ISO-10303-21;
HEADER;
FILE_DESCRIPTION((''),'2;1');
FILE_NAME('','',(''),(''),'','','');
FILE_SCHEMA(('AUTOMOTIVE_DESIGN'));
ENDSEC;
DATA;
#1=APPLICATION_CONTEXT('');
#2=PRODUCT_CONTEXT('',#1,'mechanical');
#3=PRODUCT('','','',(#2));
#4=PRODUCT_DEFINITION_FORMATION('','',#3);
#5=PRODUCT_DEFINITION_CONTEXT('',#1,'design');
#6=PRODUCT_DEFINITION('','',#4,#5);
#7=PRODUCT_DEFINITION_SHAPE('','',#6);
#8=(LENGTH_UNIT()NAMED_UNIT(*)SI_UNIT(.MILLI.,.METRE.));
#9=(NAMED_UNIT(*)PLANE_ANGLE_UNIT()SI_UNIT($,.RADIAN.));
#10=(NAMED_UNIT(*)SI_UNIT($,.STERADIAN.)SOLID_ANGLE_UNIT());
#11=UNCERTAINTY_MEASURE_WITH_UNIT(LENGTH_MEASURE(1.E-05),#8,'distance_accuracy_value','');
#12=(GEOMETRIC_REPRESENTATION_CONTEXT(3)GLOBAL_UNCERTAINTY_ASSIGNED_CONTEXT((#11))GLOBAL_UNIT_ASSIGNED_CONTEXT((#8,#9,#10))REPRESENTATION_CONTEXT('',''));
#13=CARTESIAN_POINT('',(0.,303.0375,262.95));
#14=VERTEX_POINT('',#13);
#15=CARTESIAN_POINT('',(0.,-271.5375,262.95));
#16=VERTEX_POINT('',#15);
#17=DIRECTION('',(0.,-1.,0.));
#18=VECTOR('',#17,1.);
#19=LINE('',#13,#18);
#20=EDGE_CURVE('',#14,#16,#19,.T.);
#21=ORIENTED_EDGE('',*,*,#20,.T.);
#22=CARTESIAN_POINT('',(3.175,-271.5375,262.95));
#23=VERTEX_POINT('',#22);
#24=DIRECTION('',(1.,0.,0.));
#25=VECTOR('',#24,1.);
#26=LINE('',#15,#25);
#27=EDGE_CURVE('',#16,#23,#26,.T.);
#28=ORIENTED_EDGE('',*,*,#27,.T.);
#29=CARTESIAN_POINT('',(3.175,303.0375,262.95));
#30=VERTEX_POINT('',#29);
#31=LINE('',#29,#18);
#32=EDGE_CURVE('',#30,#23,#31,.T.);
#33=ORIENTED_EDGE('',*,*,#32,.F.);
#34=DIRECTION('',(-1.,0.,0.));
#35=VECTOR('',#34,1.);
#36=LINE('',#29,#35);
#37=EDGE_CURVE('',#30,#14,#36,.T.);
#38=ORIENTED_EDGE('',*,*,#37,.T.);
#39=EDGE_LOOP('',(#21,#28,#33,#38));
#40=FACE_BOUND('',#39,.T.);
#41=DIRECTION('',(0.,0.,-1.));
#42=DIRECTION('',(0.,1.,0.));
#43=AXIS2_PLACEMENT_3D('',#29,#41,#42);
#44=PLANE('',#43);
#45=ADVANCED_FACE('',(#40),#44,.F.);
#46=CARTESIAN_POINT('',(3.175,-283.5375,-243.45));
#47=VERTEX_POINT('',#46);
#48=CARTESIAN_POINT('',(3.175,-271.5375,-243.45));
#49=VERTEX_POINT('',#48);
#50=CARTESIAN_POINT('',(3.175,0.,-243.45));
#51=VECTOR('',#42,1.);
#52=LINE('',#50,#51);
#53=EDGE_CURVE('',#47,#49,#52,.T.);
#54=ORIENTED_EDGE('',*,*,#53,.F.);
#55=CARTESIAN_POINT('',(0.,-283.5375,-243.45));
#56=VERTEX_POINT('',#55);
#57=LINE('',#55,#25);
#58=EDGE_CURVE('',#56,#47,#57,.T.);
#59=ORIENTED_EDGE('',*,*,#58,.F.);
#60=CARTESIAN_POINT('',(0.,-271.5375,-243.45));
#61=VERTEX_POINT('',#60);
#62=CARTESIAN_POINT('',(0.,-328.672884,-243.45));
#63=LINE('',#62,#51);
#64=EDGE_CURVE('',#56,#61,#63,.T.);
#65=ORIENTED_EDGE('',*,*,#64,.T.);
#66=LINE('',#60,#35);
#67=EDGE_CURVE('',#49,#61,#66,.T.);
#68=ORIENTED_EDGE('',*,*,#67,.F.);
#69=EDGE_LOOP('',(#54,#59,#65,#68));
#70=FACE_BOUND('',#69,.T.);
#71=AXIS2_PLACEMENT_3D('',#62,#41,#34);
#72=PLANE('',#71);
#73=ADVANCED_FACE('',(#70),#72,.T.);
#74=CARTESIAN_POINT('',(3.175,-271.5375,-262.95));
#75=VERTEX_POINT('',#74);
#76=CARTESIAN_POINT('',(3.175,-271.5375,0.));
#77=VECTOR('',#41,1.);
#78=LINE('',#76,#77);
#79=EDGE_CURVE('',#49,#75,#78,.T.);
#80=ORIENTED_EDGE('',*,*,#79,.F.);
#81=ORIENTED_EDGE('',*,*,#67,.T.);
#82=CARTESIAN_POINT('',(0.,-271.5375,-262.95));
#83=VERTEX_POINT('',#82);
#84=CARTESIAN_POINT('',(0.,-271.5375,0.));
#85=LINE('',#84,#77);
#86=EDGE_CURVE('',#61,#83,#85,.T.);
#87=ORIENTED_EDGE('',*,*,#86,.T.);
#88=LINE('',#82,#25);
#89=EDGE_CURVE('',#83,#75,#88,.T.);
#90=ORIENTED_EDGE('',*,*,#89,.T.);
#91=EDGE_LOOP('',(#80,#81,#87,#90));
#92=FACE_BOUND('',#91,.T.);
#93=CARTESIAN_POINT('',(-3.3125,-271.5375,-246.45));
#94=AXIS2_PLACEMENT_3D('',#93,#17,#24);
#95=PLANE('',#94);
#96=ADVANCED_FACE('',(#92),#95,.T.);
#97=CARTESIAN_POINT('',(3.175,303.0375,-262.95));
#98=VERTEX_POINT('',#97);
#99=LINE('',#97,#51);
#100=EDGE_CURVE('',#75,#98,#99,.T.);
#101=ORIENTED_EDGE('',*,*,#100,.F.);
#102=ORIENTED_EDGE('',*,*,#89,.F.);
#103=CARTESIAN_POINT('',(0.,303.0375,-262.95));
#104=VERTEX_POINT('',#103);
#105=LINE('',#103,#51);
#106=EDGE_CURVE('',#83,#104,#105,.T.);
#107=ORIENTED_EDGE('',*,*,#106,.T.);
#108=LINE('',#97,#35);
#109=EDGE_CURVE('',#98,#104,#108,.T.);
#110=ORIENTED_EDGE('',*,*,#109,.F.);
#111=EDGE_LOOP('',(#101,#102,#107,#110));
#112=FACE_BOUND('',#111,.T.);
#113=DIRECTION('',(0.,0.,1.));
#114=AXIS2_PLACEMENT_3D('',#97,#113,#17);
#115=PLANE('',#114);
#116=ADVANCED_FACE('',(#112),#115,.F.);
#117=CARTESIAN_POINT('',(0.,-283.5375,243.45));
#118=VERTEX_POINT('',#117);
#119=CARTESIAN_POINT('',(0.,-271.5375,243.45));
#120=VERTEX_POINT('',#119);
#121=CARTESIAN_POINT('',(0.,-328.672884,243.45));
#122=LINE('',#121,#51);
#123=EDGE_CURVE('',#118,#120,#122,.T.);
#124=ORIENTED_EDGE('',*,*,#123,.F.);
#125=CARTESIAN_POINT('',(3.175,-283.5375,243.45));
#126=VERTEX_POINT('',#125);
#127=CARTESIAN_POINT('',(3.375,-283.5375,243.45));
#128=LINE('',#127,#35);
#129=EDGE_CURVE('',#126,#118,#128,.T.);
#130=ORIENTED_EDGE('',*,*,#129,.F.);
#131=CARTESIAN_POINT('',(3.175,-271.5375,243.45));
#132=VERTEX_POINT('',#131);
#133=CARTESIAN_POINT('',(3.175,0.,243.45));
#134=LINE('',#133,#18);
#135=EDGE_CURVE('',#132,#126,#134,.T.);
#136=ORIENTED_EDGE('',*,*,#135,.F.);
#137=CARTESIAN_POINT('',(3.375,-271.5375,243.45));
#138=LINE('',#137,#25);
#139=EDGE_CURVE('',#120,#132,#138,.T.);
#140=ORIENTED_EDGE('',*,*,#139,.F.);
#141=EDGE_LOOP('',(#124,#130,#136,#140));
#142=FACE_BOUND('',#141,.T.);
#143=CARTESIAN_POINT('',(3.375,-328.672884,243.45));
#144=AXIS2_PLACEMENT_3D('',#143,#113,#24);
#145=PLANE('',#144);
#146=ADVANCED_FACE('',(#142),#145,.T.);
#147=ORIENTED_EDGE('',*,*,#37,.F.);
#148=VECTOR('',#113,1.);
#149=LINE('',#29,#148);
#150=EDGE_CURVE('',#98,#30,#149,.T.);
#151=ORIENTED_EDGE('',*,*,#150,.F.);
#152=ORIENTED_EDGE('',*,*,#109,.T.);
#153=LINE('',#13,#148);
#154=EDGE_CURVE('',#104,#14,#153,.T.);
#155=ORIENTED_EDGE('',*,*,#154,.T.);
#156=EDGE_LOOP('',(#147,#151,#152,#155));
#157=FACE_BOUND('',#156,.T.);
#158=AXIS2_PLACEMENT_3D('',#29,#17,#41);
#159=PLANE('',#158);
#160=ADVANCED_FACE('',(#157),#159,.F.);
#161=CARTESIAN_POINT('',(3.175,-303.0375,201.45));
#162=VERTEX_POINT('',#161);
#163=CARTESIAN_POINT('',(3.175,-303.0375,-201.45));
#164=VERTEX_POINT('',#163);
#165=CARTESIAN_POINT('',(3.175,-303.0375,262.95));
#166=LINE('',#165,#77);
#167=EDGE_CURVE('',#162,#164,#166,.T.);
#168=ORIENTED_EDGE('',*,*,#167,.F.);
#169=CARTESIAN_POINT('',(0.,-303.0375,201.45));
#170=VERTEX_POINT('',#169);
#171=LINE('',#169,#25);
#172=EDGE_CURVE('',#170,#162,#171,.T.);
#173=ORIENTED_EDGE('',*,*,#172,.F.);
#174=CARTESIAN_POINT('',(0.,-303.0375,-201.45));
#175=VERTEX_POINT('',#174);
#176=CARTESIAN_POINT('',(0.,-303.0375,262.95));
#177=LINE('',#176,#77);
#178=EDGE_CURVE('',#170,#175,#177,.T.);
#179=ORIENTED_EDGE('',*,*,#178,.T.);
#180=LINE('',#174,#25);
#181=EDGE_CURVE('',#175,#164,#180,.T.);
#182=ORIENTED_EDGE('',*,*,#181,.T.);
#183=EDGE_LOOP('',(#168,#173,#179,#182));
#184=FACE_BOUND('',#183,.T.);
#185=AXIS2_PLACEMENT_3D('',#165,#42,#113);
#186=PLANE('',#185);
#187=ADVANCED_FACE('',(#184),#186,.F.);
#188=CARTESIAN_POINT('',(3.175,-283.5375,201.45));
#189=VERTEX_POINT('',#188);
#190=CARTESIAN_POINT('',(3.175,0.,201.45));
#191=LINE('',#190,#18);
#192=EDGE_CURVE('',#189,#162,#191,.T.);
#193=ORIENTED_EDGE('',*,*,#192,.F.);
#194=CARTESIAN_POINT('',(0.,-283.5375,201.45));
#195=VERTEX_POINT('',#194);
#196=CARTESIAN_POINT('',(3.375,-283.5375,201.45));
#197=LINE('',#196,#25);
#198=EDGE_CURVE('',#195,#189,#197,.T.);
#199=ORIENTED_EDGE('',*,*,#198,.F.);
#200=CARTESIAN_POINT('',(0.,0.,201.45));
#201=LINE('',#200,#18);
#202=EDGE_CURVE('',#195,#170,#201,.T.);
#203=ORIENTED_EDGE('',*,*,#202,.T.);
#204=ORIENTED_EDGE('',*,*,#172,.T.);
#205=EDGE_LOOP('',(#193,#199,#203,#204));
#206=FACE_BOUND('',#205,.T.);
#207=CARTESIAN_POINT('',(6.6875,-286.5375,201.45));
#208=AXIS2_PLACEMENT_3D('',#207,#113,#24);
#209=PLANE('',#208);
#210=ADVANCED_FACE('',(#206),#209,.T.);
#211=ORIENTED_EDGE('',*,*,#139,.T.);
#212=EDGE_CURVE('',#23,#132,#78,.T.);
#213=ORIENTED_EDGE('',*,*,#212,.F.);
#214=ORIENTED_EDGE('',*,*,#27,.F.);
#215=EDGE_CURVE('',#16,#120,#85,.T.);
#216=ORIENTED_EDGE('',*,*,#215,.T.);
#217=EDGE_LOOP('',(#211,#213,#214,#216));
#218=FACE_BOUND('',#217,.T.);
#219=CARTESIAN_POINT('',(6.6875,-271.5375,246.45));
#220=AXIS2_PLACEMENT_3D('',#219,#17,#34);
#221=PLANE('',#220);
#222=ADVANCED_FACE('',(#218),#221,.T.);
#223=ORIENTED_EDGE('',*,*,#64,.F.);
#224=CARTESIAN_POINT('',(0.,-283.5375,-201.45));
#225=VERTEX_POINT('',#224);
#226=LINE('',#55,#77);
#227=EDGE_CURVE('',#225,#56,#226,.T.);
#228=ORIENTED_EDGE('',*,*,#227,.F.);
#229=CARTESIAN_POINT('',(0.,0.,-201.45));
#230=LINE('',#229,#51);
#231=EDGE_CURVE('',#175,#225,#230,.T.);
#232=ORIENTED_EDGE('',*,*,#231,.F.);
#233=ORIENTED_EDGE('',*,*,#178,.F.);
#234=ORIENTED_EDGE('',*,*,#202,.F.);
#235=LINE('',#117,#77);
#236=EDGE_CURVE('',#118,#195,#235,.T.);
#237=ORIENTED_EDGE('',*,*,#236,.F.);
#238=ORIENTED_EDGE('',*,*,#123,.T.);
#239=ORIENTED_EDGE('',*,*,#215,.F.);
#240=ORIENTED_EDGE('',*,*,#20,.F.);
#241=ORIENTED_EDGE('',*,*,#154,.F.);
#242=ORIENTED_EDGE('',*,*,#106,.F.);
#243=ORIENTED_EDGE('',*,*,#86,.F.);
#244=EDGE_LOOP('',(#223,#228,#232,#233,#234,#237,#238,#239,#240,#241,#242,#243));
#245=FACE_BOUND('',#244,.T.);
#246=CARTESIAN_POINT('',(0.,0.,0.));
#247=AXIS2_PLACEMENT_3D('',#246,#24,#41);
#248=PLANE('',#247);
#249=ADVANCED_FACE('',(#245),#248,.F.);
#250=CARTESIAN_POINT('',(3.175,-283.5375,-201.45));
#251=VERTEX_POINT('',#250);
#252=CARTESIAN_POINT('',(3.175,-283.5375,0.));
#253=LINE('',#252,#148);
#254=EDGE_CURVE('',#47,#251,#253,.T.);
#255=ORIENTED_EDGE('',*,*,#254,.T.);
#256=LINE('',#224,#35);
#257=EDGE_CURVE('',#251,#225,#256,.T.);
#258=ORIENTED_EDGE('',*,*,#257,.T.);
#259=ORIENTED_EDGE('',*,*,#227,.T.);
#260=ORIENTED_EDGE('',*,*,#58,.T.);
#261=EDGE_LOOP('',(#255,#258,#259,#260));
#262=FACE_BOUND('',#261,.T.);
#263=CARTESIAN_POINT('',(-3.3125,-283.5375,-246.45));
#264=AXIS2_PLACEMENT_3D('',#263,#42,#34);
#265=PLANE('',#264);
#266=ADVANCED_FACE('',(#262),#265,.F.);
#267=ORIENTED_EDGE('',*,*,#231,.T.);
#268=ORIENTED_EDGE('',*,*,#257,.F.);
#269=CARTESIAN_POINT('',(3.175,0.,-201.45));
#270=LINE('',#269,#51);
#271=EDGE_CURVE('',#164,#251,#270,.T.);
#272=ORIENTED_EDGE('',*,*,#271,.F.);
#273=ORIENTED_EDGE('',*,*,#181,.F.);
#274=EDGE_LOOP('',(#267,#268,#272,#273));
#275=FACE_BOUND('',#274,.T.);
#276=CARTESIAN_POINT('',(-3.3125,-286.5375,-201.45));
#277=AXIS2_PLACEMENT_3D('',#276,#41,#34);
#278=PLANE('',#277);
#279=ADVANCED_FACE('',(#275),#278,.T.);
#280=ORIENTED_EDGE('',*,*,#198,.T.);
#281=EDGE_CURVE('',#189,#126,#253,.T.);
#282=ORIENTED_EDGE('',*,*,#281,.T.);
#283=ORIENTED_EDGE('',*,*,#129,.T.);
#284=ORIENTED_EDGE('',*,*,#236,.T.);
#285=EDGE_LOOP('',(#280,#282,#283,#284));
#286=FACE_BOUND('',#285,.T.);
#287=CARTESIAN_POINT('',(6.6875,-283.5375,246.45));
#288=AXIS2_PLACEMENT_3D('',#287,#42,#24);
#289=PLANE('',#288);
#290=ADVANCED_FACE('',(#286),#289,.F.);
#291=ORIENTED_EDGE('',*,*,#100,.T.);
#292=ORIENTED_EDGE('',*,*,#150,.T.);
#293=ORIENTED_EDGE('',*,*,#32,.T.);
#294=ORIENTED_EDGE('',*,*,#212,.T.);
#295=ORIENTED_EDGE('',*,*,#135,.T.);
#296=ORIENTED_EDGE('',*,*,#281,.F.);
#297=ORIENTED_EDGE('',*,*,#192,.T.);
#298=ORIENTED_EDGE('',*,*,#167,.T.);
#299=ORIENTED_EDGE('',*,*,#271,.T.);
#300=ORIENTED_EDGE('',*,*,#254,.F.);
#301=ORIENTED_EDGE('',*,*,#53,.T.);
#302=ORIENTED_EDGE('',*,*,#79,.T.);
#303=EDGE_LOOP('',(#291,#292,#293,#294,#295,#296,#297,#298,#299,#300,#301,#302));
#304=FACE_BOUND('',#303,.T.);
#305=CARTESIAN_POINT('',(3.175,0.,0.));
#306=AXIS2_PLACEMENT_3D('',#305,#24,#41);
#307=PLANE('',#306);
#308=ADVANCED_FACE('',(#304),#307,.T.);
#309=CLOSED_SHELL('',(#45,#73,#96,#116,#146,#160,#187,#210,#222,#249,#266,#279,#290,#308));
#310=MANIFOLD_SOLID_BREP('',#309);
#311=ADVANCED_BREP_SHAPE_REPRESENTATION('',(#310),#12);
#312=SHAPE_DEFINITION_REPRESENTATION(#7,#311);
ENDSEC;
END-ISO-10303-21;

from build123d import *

# Parameters (mm, degrees)
SKETCH1_W           = 525.9
SKETCH1_H           = 606.075
BOSS_EXTRUDE1_DEPTH = 3.175
CAVITY1_DEPTH       = 3.175
SKETCH2_W           = 42
SKETCH2_H           = 19.5
CUT_EXTRUDE1_DEPTH  = 402.228749632


# Read off the part's stored shape, not the designer's step: Cavity1
with BuildPart() as part:
    # Sketch1 → Boss-Extrude1 (new body)
    with BuildSketch(Plane(origin=(0, 0, 0), x_dir=(0, 0, -1), z_dir=(1, 0, 0))):
        Rectangle(SKETCH1_W, SKETCH1_H)
    extrude(amount=BOSS_EXTRUDE1_DEPTH)

    # Cavity1 outline → Cavity1 (cut)
    with BuildSketch(Plane.YZ):
        Polygon((-301.162499999, 201.45), (-283.5375, 201.45), (-283.5375, 243.45), (-271.5375, 243.45), (-271.5375, 261.074999999), (-286.5375, 261.074999999), (-286.7875, 261.372938397), (-286.7875, 261.377061601), (-286.5375, 261.674999999), (-286.5375, 262.95), (-301.162499999, 262.95), align=None)
        Polygon((-271.5375, -261.074999999), (-271.5375, -243.45), (-283.5375, -243.45), (-283.5375, -201.45), (-301.162499999, -201.45), (-301.162499999, -262.95), (-286.5375, -262.95), (-286.5375, -261.674999999), (-286.7875, -261.377061601), (-286.7875, -261.372938397), (-286.5375, -261.074999999), align=None)
    extrude(amount=CAVITY1_DEPTH, mode=Mode.SUBTRACT)

    # Sketch2 → Cut-Extrude1 (cut, through all)
    with BuildSketch(Plane(origin=(3.175, 0, 0), x_dir=(0, 0, -1), z_dir=(1, 0, 0))):
        Polygon((-243.45, -283.5375), (-243.45, -271.5375), (-262.95, -271.5375), (-262.95, -303.0375), (-243.45, -303.0375), align=None)
        with Locations((-222.45, -293.2875)):
            Rectangle(SKETCH2_W, SKETCH2_H)
        Polygon((262.95, -271.5375), (243.45, -271.5375), (243.45, -283.5375), (243.45, -303.0375), (262.95, -303.0375), align=None)
        with Locations((222.45, -293.2875)):
            Rectangle(SKETCH2_W, SKETCH2_H)
    extrude(amount=-CUT_EXTRUDE1_DEPTH, mode=Mode.SUBTRACT)


solid = part.part
